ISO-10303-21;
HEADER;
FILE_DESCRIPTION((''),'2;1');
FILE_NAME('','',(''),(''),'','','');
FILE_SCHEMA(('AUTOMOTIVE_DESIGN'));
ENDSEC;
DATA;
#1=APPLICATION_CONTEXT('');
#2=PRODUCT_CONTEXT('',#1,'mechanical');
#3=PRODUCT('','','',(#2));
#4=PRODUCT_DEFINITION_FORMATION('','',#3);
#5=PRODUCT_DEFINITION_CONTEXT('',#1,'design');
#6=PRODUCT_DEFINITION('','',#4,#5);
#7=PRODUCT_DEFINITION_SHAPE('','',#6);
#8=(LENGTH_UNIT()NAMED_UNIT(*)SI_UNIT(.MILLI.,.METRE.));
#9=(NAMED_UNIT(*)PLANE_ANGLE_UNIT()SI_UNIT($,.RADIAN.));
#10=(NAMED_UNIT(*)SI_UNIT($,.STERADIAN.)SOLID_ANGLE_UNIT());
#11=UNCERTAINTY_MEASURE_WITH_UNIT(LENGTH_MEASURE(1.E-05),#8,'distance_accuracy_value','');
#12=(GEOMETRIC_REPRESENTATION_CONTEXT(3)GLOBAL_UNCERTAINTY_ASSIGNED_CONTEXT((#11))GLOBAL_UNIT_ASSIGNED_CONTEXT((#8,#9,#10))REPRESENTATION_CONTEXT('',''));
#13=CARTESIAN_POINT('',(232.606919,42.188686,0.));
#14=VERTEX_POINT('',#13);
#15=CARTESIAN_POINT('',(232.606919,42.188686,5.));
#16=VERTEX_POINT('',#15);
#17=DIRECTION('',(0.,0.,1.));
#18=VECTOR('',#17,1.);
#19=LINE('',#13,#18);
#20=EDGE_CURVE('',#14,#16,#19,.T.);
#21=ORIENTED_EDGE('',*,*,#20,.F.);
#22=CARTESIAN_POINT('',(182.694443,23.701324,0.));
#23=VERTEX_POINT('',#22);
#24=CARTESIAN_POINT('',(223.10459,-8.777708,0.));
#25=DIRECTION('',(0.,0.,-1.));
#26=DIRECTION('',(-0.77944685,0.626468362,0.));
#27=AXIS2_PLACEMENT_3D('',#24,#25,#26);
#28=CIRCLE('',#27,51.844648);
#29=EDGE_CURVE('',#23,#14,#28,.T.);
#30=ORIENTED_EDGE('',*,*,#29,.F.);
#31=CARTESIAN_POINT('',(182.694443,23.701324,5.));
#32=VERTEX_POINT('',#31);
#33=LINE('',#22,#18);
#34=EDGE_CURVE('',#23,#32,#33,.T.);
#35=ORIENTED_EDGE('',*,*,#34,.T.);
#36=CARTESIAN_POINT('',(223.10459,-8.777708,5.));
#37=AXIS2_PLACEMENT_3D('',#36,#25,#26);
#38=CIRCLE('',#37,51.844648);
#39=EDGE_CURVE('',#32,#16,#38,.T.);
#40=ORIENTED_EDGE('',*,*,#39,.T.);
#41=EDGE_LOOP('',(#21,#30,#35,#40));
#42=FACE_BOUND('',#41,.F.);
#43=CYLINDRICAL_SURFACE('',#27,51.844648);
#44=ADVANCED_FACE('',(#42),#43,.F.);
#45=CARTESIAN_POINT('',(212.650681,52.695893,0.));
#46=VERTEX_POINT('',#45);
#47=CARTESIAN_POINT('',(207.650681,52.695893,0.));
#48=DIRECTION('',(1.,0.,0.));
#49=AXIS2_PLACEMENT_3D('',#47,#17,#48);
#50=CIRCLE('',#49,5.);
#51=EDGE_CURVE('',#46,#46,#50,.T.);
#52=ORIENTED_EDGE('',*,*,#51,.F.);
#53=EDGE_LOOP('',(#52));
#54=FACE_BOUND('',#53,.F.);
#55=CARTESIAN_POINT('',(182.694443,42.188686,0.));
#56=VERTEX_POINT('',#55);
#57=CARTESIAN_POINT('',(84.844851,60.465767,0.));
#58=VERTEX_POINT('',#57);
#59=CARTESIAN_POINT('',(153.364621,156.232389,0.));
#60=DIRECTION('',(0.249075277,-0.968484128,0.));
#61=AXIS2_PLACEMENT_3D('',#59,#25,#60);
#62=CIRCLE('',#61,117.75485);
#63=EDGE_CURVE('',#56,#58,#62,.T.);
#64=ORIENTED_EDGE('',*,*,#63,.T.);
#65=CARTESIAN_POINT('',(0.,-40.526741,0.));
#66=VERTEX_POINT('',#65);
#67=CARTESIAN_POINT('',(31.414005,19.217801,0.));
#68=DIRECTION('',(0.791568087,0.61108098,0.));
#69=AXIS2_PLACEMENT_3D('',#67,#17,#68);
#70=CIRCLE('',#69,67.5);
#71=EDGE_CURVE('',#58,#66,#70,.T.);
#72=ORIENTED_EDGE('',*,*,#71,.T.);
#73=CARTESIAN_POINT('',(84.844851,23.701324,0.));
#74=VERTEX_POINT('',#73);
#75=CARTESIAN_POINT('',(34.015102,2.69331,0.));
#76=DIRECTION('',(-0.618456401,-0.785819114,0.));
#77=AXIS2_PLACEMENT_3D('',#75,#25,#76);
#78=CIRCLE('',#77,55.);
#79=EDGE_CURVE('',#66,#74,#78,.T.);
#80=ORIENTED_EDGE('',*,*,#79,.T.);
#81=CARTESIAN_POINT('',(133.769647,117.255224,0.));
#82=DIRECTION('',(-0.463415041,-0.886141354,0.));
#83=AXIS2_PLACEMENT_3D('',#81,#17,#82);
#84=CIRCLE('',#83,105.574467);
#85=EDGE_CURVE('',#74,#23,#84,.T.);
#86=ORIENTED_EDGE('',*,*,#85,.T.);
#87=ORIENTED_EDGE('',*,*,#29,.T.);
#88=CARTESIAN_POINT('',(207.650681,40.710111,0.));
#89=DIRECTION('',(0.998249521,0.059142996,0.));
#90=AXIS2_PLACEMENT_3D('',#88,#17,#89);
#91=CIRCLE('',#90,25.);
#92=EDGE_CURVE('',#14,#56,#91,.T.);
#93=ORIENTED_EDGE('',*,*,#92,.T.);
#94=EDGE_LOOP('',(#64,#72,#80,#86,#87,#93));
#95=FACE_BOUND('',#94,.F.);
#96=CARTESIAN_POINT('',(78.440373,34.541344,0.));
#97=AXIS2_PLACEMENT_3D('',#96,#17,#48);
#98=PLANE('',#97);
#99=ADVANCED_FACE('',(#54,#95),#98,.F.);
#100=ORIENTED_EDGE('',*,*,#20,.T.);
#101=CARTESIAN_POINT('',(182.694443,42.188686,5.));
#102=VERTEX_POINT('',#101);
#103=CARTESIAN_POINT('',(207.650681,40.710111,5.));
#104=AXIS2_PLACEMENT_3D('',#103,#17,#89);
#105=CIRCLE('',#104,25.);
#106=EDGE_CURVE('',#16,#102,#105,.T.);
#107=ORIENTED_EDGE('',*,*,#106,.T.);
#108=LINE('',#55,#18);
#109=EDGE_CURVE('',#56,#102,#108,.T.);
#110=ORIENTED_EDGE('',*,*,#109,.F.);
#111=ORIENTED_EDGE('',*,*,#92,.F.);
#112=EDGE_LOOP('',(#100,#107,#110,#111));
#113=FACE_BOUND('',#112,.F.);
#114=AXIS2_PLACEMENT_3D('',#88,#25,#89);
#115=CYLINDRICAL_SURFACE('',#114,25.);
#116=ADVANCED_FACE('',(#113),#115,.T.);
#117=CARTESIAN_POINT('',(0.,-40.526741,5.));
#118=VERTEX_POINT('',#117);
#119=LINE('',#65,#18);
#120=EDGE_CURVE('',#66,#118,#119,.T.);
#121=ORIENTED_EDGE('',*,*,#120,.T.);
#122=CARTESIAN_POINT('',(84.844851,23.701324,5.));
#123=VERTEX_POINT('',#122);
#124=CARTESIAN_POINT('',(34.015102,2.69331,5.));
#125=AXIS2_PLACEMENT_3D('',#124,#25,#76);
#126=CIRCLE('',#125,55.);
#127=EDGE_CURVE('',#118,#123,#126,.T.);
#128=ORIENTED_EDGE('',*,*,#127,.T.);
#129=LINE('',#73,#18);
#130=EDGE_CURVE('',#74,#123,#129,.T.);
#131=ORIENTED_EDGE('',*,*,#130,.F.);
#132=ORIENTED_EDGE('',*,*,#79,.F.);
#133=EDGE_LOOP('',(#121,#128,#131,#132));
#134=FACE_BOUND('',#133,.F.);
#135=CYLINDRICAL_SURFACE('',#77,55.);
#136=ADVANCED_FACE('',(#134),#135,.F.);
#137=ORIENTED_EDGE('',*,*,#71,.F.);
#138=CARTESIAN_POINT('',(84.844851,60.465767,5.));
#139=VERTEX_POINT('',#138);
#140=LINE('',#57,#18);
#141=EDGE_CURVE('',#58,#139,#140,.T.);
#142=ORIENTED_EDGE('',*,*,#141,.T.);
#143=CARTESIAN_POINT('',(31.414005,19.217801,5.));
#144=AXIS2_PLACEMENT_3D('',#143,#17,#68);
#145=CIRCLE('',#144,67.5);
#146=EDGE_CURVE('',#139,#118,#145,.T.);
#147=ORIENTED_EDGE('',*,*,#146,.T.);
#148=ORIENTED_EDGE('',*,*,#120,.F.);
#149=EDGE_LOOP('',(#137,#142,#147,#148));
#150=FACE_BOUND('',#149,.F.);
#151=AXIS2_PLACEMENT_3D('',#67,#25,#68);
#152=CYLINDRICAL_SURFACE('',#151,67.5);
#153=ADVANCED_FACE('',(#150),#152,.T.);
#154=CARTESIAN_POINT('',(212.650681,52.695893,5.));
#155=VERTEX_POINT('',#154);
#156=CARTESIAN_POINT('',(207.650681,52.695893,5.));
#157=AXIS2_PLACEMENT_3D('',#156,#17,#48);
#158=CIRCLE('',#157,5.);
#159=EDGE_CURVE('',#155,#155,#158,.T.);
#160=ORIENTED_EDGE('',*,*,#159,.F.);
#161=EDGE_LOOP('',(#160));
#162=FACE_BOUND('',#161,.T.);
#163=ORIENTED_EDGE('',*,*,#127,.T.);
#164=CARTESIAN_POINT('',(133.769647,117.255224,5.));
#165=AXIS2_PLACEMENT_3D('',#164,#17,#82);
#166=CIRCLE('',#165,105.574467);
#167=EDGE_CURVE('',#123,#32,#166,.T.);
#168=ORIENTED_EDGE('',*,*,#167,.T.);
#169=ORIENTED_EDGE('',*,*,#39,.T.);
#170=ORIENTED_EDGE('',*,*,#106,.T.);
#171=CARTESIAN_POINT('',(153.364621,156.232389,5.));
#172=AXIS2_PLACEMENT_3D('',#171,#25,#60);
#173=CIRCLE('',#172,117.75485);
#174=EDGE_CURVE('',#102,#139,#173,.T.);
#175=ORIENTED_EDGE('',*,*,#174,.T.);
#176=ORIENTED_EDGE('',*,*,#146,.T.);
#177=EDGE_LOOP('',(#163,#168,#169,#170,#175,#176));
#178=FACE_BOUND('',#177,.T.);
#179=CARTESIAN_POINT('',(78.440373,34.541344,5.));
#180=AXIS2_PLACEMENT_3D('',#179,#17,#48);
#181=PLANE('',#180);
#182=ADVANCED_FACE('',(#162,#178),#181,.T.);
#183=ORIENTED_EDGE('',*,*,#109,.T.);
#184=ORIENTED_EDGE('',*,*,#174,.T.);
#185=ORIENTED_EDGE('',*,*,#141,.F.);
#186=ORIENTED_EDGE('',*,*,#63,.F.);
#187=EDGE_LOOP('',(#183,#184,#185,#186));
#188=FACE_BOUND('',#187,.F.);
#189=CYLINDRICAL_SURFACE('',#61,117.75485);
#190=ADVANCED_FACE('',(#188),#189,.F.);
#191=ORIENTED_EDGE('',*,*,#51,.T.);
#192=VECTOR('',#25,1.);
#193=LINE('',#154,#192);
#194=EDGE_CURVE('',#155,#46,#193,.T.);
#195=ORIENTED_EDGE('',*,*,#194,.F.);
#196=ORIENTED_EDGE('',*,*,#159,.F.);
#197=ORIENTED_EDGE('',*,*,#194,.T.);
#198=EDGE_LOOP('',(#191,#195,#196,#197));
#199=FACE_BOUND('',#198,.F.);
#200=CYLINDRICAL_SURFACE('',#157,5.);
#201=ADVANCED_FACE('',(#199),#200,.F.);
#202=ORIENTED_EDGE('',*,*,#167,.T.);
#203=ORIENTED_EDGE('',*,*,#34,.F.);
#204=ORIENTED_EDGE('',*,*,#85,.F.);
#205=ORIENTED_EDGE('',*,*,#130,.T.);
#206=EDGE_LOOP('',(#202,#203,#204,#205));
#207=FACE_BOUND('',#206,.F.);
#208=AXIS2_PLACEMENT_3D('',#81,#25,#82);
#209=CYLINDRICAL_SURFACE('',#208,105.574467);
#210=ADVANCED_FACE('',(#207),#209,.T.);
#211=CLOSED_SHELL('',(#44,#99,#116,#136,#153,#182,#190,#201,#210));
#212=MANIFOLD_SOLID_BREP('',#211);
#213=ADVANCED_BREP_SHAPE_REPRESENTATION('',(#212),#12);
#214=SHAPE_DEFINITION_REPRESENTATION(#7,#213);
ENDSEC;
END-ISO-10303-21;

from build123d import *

# Parameters (mm, degrees)
F1_DEPTH = 5
F2_R     = 5
F3_DEPTH = 389
F4_R     = 5
F5_DEPTH = 5.001


# Not quite as in the source:
# - an extrude ends at something that could not be found from the text; its depth is read off the source's solid


with BuildPart() as f1:
    # F0 (on Top) → F1 (new body)
    with BuildSketch(Plane.XY):
        with BuildLine():
            ThreePointArc((182.6944426466, 42.1886855807), (131.7434290728, 40.4795108007), (84.8448510232, 60.4657670673))
            ThreePointArc((84.8448510232, 60.4657670673), (-20.2682643936, 62.6366103984), (0, -40.5267409035))
            ThreePointArc((0, -40.5267409035), (0.8188047448, 46.5454009095), (84.8448510232, 23.7013236039))
            ThreePointArc((84.8448510232, 23.7013236039), (133.7696468349, 11.680757797), (182.6944426466, 23.7013236039))
            ThreePointArc((182.6944426466, 23.7013236039), (205.0971207079, 39.8391466865), (232.6069186924, 42.1886855807))
            ThreePointArc((232.6069186924, 42.1886855807), (207.6506806695, 65.7101106777), (182.6944426466, 42.1886855807))
        make_face()
    extrude(amount=F1_DEPTH)

    # F2 (on Top) → F3 (cut, through all)
    with BuildSketch(Plane.XY):
        with Locations((210.5412267722, 54.1418395773)):
            Circle(F2_R)
    extrude(amount=-F3_DEPTH, mode=Mode.SUBTRACT)

    # F4 (on face) → F5 (cut, through all)
    with BuildSketch(Plane.XY.offset(5)):
        with Locations((207.6506806695, 52.6958927512)):
            Circle(F4_R)
    extrude(amount=-F5_DEPTH, mode=Mode.SUBTRACT)


solid = f1.part
